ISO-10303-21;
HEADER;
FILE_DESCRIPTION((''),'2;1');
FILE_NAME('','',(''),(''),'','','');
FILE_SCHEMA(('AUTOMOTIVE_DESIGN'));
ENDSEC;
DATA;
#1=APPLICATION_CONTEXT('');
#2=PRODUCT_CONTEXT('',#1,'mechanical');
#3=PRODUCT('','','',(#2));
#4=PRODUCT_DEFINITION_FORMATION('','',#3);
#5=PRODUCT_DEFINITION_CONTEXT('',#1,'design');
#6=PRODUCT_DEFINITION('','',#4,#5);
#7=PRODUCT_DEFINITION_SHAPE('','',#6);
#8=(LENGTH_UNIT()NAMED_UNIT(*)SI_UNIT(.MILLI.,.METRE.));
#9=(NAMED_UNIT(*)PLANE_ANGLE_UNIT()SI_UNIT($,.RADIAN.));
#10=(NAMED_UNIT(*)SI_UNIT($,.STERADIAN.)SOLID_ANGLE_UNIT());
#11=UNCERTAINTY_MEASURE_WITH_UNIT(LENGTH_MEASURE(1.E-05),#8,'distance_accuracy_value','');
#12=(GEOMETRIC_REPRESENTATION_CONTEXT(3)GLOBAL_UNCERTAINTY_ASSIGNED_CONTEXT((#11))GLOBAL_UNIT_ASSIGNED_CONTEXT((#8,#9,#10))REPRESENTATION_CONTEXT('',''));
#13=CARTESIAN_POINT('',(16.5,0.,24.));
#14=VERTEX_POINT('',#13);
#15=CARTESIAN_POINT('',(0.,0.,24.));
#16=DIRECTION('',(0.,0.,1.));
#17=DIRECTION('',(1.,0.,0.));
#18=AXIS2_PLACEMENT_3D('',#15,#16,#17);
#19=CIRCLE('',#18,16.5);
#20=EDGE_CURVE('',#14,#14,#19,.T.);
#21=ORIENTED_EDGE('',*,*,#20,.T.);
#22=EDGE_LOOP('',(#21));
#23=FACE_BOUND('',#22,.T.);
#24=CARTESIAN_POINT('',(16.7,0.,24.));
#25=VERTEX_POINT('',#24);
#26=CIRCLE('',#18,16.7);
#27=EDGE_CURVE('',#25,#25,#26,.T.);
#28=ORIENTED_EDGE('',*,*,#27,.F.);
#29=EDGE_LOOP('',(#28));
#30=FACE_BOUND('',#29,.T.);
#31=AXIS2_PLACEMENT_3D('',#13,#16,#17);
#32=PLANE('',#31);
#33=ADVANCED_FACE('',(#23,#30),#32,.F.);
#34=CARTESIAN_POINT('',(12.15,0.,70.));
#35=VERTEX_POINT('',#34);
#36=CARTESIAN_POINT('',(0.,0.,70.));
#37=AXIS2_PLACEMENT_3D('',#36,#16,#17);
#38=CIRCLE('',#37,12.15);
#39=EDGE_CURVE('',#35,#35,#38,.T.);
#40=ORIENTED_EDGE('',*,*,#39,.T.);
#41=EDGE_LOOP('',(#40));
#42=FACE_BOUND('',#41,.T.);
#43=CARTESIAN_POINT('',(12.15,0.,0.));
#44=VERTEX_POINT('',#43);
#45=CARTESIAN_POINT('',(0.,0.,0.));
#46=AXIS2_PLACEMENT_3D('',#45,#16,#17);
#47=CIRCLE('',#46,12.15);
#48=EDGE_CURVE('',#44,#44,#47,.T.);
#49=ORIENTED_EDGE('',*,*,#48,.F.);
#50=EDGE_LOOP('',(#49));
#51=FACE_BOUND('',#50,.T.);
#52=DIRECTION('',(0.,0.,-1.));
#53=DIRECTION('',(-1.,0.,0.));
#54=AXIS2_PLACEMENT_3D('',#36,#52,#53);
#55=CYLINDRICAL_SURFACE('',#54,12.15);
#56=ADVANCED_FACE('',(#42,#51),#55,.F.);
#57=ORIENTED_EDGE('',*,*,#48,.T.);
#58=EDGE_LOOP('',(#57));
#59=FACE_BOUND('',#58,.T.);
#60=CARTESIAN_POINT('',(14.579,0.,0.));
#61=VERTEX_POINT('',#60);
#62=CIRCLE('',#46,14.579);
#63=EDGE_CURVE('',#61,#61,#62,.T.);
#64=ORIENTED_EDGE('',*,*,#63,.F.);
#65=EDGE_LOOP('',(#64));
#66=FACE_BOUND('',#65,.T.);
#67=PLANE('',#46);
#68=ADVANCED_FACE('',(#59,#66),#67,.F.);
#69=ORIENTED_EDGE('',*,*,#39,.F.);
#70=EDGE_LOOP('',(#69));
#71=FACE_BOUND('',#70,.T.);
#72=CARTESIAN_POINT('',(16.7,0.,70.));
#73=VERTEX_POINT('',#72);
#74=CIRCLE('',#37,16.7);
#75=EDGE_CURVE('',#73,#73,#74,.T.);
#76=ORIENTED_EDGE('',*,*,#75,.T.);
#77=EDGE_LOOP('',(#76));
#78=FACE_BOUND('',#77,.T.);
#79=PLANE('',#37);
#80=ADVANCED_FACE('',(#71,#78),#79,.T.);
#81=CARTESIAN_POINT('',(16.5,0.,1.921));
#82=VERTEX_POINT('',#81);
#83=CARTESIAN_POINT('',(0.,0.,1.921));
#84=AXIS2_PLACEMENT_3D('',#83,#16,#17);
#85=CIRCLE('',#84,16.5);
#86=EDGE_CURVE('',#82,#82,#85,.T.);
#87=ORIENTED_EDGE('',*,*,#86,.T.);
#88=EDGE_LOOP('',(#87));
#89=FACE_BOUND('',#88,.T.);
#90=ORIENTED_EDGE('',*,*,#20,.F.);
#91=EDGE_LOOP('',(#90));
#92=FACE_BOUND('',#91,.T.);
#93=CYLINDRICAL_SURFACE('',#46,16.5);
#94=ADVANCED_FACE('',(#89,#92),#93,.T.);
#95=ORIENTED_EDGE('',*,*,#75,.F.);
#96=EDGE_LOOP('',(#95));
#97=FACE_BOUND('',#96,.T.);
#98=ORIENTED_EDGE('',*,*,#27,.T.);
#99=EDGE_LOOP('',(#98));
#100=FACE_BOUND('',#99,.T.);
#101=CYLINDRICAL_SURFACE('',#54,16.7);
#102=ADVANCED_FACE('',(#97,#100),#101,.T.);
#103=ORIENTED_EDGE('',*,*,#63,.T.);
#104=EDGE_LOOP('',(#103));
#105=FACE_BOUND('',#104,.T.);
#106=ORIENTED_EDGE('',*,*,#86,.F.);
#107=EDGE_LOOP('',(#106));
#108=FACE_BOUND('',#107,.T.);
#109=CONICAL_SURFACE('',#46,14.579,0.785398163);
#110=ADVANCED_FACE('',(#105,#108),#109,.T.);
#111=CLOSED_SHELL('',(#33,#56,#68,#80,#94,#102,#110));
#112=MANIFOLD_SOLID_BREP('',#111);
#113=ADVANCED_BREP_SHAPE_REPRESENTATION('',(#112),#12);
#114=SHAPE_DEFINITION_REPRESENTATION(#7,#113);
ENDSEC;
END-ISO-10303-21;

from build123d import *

# Parameters (mm, degrees)
SKETCH1_R           = 16.7
SKETCH1_R_2         = 12.15
BOSS_EXTRUDE1_DEPTH = 70


# Read off the part's stored shape, not the designer's step: M33x3.5 Machine Threads Stud1
with BuildPart() as part:
    # Sketch1 → Boss-Extrude1 (new body)
    with BuildSketch(Plane.XY):
        Circle(SKETCH1_R)
        Circle(SKETCH1_R_2, mode=Mode.SUBTRACT)
    extrude(amount=BOSS_EXTRUDE1_DEPTH)

    # M33x3.5 Machine Threads Stud1 outline → M33x3.5 Machine Threads Stud1 (revolve, cut)
    with BuildSketch(Plane.XZ):
        Polygon((14.579, 0), (16.7, 0), (16.7, 24), (16.5, 24), (16.5, 1.921), align=None)
    revolve(axis=Axis((0, 0, 0), (0, 0, 1)), mode=Mode.SUBTRACT)


solid = part.part
